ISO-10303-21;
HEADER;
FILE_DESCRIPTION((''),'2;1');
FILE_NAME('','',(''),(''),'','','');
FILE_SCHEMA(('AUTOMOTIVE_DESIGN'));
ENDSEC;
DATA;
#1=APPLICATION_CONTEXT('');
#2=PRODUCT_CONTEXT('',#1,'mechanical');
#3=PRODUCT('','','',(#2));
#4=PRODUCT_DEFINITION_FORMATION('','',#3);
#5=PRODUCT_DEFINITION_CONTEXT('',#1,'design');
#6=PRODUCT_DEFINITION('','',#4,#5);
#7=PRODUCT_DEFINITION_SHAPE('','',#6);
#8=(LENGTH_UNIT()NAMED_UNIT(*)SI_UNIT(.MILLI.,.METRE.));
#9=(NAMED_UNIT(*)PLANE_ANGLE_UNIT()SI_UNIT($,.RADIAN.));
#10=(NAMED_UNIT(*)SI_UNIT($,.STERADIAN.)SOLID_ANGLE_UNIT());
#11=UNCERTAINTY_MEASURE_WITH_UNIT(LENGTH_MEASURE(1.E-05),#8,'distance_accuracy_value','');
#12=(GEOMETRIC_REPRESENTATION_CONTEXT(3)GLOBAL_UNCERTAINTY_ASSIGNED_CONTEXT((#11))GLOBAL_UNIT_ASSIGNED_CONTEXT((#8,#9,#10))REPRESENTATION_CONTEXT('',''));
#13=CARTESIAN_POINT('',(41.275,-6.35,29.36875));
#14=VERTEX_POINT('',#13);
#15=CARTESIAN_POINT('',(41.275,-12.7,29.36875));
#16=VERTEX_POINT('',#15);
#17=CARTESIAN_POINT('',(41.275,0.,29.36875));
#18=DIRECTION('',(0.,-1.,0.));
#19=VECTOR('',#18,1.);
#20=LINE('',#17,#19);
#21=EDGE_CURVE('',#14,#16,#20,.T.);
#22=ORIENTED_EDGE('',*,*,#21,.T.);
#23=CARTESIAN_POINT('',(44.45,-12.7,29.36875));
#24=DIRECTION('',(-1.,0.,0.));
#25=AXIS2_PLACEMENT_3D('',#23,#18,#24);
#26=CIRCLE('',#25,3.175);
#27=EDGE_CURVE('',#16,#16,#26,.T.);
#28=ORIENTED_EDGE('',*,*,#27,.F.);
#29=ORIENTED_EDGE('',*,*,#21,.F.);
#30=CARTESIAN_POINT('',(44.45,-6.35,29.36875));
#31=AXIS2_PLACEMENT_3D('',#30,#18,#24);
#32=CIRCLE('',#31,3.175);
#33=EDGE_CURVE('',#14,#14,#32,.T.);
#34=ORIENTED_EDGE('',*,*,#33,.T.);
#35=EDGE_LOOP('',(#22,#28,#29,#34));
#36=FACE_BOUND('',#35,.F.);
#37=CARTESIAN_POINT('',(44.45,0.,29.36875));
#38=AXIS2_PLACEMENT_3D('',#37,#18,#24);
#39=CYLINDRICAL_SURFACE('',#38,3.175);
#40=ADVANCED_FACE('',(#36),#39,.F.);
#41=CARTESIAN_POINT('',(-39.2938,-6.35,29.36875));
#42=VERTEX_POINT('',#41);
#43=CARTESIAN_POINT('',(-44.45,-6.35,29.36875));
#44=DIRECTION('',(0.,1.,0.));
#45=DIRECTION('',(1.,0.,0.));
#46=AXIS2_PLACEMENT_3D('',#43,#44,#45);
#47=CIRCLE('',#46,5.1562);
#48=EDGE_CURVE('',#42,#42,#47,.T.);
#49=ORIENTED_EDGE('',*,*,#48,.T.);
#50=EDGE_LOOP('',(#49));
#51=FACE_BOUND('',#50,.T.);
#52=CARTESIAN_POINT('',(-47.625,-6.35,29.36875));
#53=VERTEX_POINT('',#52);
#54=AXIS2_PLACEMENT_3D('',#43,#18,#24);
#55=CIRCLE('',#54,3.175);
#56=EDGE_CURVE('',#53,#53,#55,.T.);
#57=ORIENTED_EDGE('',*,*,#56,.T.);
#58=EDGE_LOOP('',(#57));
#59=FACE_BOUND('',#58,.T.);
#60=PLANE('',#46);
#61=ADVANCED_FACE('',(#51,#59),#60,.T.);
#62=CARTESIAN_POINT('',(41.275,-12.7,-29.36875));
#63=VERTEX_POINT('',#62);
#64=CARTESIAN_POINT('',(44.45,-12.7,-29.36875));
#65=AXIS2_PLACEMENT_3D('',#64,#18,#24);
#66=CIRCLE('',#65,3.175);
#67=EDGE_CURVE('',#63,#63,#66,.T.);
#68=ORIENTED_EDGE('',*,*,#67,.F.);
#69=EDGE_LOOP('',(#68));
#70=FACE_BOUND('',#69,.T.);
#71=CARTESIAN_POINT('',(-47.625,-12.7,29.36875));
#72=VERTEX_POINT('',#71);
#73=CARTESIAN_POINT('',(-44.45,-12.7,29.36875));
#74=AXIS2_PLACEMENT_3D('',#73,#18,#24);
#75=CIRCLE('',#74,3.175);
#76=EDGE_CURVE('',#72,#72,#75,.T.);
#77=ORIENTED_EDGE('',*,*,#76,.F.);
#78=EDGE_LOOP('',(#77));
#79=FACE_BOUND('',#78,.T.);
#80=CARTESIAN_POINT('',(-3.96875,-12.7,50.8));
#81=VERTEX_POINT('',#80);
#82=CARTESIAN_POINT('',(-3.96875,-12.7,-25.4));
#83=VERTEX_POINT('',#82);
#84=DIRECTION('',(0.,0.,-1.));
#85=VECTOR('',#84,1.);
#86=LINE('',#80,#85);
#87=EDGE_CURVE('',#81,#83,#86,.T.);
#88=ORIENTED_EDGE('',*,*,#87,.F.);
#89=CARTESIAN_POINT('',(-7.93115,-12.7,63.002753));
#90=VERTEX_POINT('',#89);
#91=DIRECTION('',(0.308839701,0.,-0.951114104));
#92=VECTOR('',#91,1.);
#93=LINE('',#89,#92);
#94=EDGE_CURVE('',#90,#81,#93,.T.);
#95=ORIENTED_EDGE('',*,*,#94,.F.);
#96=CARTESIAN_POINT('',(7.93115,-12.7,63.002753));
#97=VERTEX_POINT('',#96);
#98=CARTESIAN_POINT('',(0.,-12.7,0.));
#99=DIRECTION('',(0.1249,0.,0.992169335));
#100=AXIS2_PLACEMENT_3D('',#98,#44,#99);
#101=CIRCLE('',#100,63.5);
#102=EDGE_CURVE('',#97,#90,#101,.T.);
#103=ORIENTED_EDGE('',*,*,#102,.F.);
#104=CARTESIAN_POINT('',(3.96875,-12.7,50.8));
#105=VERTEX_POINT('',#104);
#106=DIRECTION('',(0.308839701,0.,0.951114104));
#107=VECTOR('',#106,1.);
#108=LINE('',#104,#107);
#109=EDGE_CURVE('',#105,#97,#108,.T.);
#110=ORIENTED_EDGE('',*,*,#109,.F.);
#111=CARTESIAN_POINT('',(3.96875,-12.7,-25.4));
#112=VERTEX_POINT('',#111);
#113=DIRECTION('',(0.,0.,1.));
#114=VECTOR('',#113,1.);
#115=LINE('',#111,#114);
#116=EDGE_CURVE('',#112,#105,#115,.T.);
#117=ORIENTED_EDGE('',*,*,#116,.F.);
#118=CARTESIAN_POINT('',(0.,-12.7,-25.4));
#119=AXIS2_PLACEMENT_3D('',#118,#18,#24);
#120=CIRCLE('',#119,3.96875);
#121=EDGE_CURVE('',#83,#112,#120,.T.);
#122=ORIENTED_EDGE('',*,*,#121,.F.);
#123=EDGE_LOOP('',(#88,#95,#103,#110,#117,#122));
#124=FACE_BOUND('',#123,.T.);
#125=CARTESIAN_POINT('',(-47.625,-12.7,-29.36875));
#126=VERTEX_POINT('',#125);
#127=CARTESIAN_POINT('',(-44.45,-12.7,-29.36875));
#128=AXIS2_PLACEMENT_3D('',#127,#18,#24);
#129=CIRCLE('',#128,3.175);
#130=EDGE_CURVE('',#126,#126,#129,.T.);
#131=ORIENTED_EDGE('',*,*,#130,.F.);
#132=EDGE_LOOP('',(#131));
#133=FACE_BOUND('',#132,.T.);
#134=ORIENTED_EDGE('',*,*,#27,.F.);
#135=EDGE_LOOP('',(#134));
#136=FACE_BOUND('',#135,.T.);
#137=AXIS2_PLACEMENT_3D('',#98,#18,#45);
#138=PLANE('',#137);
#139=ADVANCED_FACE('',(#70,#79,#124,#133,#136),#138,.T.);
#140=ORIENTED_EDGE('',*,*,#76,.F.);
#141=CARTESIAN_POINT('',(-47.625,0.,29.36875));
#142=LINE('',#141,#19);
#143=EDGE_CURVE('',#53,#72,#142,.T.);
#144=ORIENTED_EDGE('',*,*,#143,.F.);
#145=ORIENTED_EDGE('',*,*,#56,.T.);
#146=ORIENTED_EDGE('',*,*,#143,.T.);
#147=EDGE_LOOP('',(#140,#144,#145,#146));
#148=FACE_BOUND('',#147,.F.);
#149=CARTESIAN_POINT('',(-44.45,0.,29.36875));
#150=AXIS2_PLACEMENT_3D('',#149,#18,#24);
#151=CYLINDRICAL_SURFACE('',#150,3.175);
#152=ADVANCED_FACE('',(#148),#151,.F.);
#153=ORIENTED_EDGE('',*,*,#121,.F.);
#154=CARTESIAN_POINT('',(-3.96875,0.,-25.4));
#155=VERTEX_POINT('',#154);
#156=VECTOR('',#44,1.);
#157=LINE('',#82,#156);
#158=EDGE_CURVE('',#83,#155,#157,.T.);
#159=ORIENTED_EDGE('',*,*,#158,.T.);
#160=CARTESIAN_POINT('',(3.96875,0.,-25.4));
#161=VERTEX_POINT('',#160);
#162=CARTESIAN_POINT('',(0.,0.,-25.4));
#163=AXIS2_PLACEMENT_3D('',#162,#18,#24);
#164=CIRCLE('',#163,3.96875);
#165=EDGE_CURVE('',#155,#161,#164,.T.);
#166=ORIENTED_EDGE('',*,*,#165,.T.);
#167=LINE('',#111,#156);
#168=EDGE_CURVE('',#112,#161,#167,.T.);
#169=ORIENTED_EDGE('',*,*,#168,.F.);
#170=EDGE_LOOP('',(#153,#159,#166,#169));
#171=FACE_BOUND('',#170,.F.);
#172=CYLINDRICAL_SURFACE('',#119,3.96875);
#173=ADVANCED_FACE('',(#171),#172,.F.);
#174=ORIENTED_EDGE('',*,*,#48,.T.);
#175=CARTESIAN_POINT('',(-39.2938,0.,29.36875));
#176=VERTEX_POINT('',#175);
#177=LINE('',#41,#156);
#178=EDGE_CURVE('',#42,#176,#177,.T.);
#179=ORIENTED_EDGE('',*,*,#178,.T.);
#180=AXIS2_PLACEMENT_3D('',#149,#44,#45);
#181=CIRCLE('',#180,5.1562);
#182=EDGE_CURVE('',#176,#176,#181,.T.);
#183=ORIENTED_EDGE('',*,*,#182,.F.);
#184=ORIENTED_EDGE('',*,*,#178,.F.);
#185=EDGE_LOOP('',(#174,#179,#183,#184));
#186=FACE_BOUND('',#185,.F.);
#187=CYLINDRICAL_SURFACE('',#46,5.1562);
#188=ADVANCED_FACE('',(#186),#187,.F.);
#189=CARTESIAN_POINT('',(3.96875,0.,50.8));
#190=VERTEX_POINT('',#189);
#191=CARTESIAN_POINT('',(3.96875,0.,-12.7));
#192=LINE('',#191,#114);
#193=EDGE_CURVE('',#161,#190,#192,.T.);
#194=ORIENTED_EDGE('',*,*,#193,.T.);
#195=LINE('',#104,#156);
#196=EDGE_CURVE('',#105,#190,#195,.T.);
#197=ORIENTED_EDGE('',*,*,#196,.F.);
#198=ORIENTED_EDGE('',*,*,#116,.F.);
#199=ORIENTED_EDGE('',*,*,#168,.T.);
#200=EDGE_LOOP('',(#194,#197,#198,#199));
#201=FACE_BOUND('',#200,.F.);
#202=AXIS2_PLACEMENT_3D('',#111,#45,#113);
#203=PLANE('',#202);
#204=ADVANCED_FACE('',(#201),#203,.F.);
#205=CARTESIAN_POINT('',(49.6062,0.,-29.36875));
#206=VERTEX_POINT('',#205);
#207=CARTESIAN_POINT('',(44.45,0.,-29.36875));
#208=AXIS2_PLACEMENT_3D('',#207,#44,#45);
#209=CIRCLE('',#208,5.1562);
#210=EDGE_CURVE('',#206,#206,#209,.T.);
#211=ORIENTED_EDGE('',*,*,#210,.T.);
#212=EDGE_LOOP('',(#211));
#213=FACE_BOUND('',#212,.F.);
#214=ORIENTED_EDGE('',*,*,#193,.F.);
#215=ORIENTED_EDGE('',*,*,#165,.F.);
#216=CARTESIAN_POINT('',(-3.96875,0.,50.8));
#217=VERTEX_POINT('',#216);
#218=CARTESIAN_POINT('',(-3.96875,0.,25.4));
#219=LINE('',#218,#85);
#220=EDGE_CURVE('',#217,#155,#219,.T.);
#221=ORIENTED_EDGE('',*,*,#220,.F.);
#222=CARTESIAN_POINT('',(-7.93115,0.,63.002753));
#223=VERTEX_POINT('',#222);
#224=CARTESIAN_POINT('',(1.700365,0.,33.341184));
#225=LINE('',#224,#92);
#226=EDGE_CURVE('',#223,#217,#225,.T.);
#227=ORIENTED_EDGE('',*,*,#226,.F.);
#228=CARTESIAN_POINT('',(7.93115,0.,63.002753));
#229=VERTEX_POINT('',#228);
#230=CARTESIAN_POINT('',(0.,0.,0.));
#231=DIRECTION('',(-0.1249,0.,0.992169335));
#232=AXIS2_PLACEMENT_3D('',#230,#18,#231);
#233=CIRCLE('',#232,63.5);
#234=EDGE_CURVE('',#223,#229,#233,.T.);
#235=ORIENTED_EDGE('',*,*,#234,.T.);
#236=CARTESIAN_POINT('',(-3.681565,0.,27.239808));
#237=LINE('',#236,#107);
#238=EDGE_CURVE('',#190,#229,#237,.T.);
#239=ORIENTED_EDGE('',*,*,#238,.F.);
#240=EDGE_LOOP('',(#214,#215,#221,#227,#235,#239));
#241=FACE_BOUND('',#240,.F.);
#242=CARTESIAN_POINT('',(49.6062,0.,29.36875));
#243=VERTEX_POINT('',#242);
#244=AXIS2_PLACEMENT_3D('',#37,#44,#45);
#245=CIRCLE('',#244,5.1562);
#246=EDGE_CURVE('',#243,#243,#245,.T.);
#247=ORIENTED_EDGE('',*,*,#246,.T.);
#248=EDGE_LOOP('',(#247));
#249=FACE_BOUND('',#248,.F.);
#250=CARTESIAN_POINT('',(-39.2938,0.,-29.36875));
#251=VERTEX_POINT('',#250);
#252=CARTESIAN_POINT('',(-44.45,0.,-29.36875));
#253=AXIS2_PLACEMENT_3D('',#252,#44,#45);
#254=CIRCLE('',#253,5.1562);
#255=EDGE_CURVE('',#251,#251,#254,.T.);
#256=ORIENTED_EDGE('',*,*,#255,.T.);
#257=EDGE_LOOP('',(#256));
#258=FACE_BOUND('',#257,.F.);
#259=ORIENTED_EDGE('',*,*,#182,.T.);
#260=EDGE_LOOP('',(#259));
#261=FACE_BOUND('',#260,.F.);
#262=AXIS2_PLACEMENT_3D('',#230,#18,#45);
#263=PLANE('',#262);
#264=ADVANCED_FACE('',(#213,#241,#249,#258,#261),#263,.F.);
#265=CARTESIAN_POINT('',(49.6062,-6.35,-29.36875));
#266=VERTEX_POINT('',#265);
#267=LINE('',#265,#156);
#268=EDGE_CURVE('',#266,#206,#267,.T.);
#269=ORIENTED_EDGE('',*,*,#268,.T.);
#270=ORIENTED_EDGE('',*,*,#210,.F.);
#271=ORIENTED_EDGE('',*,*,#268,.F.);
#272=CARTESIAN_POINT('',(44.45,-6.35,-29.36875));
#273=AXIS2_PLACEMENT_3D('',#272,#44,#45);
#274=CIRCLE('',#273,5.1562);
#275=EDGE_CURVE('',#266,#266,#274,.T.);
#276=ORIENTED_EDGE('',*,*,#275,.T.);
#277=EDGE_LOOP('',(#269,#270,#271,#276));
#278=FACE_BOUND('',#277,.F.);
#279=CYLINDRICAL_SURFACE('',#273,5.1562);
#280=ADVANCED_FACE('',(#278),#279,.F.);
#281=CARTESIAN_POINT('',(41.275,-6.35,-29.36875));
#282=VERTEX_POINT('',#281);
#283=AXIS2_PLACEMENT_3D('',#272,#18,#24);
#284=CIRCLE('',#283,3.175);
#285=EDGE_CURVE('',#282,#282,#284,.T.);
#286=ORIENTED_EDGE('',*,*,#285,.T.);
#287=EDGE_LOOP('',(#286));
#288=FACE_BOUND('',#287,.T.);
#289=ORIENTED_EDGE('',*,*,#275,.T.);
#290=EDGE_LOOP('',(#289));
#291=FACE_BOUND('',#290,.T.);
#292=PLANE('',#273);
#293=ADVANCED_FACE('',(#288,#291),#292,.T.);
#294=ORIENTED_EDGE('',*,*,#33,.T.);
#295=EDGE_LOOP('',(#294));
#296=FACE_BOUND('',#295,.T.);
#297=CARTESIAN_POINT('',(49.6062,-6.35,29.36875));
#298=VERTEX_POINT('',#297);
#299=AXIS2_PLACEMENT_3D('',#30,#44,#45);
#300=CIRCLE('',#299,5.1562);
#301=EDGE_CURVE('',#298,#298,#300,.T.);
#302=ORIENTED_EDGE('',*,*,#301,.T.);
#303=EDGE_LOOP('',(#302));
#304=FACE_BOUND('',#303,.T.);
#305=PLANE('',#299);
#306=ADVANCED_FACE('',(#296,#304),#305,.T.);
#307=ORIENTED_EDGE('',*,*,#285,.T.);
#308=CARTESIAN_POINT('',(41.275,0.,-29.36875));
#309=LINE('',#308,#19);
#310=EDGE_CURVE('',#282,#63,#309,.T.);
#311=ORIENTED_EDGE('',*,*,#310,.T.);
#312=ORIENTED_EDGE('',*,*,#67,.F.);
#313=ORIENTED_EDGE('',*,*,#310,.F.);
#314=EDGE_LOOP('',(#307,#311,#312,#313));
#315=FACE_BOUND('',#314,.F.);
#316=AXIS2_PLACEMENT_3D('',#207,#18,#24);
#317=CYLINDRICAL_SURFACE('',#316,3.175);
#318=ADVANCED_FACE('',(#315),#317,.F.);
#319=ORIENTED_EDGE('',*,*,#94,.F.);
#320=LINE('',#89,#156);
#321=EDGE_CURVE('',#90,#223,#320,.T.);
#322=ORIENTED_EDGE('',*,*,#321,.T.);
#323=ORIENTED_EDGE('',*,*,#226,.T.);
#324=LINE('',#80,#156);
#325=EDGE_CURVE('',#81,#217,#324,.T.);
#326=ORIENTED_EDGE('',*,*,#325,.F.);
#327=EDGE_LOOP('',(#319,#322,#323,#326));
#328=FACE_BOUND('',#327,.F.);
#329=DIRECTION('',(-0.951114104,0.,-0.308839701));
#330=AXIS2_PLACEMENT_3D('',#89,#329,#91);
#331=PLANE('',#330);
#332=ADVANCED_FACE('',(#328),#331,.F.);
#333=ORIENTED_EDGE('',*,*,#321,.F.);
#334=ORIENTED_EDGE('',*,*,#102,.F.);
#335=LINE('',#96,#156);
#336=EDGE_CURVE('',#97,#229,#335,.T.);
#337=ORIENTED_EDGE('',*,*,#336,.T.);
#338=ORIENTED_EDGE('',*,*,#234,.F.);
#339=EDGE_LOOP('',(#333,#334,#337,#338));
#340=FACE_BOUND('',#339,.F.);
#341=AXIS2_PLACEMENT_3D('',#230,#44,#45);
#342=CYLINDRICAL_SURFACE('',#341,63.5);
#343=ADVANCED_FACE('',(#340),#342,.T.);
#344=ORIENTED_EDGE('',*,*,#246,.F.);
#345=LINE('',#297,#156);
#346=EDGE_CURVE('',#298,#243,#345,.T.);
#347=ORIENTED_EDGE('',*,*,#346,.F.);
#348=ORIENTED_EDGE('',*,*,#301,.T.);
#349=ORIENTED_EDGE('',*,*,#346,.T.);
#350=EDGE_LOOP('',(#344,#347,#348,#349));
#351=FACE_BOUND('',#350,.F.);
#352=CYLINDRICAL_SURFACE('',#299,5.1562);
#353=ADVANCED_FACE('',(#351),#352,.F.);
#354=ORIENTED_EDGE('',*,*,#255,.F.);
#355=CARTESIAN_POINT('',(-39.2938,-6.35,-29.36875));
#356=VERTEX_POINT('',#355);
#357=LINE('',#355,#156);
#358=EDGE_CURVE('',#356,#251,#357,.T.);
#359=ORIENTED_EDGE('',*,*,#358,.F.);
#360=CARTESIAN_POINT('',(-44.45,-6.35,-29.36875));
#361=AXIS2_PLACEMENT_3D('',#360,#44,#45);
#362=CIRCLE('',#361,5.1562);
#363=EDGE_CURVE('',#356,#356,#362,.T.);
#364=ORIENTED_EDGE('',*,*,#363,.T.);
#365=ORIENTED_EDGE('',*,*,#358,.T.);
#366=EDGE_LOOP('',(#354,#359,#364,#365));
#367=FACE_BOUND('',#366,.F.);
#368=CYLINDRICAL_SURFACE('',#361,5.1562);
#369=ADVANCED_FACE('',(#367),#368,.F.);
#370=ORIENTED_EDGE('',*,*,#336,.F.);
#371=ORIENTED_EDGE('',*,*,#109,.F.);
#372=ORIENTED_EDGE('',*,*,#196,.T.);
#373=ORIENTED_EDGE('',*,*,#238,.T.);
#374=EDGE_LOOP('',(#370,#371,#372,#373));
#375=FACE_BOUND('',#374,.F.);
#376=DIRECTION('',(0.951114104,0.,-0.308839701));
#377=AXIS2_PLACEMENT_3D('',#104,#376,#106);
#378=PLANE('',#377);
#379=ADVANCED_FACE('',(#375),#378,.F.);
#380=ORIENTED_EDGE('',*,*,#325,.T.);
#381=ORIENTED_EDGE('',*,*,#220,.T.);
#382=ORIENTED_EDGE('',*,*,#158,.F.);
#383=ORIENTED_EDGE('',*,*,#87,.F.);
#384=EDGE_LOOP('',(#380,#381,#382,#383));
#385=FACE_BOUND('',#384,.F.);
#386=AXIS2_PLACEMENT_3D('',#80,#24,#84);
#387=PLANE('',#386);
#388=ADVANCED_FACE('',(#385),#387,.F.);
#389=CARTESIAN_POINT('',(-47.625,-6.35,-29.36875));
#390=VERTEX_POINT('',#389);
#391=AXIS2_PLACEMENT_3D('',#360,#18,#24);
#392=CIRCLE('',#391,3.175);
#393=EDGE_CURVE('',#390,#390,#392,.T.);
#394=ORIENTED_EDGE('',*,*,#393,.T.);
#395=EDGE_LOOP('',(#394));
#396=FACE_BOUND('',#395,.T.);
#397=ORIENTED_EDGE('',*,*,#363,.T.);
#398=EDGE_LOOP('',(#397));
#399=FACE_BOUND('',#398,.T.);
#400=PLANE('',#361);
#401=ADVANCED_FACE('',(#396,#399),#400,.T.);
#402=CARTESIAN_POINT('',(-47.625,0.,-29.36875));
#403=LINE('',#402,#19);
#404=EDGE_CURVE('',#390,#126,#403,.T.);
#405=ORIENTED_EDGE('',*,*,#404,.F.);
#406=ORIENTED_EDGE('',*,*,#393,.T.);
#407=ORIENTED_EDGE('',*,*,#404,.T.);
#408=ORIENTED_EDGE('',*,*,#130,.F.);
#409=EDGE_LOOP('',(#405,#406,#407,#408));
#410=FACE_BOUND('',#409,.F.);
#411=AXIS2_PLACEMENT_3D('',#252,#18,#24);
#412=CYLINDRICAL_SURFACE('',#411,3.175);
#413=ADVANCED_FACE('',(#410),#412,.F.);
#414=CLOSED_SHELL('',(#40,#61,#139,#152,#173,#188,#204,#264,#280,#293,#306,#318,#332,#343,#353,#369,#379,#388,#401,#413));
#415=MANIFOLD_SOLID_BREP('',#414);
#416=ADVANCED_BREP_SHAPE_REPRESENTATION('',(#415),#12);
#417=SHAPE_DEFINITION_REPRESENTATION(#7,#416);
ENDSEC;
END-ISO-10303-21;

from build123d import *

# Parameters (mm, degrees)
F0_R           = 63.5
F1_DEPTH       = 12.7
F3_DEPTH       = 25.4
F4_D           = 6.35
F4_CBORE_D     = 10.3124
F4_CBORE_DEPTH = 6.35


# Not quite as in the source:
# - a feature names something its author has since deleted; it is built from what else it names


with BuildPart() as f1:
    # F0 (on Front) → F1 (new body)
    with BuildSketch(Plane.XZ):
        Circle(F0_R)
    extrude(amount=F1_DEPTH)

    # F2 (on face) → F3 (cut)
    with BuildSketch(Plane.XZ.offset(12.7)):
        with BuildLine():
            Line((-7.93115, 63.0027527944), (-3.96875, 50.8))
            Line((-3.96875, 50.8), (-3.96875, -25.4))
            ThreePointArc((-3.96875, -25.4), (0, -29.36875), (3.96875, -25.4))
            Line((3.96875, -25.4), (3.96875, 50.8))
            Line((3.96875, 50.8), (7.93115, 63.0027527944))
            ThreePointArc((7.93115, 63.0027527944), (0, 63.5), (-7.93115, 63.0027527944))
        make_face()
    extrude(amount=-F3_DEPTH, mode=Mode.SUBTRACT)

    # F4 (through all)
    with Locations(Plane(origin=(0, 0, 0), x_dir=(1, 0, 0), z_dir=(0, 1, 0))):
        with Locations((44.45, -29.36875), (-44.45, -29.36875), (44.45, 29.36875), (-44.45, 29.36875)):
            CounterBoreHole(F4_D / 2, F4_CBORE_D / 2, F4_CBORE_DEPTH)


solid = f1.part
